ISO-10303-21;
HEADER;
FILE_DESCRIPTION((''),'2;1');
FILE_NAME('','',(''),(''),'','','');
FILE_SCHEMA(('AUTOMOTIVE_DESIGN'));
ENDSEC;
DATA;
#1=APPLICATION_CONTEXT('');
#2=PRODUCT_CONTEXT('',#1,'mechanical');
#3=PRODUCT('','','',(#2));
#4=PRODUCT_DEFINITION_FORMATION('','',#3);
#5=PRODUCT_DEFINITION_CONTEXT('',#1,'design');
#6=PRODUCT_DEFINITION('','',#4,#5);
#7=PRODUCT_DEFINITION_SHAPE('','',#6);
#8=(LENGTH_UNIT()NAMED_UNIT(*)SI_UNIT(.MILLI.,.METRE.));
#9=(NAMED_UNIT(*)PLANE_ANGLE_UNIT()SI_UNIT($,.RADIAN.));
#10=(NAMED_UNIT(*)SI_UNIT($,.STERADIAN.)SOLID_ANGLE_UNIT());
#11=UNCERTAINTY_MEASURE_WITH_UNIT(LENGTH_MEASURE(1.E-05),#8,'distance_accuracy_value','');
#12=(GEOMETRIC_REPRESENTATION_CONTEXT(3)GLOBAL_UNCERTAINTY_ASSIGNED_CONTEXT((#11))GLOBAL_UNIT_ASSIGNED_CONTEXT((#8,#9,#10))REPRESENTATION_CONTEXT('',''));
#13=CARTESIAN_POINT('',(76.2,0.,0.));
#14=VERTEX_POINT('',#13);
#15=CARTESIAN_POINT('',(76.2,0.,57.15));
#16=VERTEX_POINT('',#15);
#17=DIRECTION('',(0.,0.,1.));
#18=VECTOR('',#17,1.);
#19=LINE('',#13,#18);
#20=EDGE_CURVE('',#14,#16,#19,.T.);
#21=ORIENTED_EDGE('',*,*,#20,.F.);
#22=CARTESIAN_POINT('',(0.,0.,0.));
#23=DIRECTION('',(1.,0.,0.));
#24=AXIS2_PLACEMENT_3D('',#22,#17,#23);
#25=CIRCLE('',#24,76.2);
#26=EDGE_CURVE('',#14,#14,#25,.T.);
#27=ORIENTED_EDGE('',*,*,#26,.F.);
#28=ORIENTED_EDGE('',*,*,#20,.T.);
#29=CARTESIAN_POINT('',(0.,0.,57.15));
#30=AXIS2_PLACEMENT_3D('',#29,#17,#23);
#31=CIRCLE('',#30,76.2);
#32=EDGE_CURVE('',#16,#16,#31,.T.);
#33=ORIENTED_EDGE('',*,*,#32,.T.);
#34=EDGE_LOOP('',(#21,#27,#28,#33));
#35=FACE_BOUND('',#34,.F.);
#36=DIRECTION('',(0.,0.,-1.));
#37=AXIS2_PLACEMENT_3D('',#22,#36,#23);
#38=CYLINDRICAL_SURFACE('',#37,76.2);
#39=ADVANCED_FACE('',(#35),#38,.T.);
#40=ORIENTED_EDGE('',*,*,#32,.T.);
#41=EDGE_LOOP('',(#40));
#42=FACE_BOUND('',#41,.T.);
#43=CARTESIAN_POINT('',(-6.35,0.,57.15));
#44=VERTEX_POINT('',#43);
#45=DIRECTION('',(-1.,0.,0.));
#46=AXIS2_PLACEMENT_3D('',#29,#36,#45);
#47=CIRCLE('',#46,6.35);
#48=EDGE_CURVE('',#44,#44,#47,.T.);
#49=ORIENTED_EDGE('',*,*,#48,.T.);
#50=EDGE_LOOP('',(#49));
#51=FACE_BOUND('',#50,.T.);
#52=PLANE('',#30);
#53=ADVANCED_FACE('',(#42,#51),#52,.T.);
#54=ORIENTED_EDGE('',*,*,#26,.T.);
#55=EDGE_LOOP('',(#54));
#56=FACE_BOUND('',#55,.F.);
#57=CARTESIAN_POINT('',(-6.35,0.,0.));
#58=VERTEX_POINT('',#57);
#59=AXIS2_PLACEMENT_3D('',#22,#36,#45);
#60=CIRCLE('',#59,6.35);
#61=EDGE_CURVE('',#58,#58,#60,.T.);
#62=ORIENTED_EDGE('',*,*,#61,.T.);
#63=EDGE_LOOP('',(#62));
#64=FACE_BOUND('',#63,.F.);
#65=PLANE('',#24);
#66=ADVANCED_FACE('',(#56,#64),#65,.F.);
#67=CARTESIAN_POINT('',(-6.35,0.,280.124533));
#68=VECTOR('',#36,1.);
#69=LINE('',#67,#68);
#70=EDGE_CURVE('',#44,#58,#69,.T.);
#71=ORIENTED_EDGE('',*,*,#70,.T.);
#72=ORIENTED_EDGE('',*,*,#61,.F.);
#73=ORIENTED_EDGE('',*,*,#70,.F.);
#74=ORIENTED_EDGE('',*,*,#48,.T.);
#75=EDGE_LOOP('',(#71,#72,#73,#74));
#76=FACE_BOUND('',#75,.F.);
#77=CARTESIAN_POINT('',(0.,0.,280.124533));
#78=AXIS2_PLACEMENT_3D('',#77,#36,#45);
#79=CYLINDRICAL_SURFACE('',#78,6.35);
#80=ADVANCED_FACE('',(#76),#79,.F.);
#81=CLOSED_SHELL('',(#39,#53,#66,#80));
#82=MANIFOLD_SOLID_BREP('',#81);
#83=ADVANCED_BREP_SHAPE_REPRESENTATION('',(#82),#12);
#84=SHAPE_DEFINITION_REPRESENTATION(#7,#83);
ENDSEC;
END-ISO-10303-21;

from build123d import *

# Parameters (mm, degrees)
F0_R     = 76.2
F1_DEPTH = 57.15
F4_D     = 12.7


# Not quite as in the source:
# - a length typed as a fraction of an inch, garbled in the dataset ("3 / 203.2 mm" for 3/8 in), is restored


with BuildPart() as f1:
    # F0 (on Top) → F1 (new body)
    with BuildSketch(Plane.XY):
        Circle(F0_R)
    extrude(amount=F1_DEPTH)

    # F4 (through all)
    with Locations(Plane.XY.offset(57.15)):
        with Locations((510.4262828827, -143.8676267862), (0, 0)):
            Hole(F4_D / 2)


solid = f1.part
